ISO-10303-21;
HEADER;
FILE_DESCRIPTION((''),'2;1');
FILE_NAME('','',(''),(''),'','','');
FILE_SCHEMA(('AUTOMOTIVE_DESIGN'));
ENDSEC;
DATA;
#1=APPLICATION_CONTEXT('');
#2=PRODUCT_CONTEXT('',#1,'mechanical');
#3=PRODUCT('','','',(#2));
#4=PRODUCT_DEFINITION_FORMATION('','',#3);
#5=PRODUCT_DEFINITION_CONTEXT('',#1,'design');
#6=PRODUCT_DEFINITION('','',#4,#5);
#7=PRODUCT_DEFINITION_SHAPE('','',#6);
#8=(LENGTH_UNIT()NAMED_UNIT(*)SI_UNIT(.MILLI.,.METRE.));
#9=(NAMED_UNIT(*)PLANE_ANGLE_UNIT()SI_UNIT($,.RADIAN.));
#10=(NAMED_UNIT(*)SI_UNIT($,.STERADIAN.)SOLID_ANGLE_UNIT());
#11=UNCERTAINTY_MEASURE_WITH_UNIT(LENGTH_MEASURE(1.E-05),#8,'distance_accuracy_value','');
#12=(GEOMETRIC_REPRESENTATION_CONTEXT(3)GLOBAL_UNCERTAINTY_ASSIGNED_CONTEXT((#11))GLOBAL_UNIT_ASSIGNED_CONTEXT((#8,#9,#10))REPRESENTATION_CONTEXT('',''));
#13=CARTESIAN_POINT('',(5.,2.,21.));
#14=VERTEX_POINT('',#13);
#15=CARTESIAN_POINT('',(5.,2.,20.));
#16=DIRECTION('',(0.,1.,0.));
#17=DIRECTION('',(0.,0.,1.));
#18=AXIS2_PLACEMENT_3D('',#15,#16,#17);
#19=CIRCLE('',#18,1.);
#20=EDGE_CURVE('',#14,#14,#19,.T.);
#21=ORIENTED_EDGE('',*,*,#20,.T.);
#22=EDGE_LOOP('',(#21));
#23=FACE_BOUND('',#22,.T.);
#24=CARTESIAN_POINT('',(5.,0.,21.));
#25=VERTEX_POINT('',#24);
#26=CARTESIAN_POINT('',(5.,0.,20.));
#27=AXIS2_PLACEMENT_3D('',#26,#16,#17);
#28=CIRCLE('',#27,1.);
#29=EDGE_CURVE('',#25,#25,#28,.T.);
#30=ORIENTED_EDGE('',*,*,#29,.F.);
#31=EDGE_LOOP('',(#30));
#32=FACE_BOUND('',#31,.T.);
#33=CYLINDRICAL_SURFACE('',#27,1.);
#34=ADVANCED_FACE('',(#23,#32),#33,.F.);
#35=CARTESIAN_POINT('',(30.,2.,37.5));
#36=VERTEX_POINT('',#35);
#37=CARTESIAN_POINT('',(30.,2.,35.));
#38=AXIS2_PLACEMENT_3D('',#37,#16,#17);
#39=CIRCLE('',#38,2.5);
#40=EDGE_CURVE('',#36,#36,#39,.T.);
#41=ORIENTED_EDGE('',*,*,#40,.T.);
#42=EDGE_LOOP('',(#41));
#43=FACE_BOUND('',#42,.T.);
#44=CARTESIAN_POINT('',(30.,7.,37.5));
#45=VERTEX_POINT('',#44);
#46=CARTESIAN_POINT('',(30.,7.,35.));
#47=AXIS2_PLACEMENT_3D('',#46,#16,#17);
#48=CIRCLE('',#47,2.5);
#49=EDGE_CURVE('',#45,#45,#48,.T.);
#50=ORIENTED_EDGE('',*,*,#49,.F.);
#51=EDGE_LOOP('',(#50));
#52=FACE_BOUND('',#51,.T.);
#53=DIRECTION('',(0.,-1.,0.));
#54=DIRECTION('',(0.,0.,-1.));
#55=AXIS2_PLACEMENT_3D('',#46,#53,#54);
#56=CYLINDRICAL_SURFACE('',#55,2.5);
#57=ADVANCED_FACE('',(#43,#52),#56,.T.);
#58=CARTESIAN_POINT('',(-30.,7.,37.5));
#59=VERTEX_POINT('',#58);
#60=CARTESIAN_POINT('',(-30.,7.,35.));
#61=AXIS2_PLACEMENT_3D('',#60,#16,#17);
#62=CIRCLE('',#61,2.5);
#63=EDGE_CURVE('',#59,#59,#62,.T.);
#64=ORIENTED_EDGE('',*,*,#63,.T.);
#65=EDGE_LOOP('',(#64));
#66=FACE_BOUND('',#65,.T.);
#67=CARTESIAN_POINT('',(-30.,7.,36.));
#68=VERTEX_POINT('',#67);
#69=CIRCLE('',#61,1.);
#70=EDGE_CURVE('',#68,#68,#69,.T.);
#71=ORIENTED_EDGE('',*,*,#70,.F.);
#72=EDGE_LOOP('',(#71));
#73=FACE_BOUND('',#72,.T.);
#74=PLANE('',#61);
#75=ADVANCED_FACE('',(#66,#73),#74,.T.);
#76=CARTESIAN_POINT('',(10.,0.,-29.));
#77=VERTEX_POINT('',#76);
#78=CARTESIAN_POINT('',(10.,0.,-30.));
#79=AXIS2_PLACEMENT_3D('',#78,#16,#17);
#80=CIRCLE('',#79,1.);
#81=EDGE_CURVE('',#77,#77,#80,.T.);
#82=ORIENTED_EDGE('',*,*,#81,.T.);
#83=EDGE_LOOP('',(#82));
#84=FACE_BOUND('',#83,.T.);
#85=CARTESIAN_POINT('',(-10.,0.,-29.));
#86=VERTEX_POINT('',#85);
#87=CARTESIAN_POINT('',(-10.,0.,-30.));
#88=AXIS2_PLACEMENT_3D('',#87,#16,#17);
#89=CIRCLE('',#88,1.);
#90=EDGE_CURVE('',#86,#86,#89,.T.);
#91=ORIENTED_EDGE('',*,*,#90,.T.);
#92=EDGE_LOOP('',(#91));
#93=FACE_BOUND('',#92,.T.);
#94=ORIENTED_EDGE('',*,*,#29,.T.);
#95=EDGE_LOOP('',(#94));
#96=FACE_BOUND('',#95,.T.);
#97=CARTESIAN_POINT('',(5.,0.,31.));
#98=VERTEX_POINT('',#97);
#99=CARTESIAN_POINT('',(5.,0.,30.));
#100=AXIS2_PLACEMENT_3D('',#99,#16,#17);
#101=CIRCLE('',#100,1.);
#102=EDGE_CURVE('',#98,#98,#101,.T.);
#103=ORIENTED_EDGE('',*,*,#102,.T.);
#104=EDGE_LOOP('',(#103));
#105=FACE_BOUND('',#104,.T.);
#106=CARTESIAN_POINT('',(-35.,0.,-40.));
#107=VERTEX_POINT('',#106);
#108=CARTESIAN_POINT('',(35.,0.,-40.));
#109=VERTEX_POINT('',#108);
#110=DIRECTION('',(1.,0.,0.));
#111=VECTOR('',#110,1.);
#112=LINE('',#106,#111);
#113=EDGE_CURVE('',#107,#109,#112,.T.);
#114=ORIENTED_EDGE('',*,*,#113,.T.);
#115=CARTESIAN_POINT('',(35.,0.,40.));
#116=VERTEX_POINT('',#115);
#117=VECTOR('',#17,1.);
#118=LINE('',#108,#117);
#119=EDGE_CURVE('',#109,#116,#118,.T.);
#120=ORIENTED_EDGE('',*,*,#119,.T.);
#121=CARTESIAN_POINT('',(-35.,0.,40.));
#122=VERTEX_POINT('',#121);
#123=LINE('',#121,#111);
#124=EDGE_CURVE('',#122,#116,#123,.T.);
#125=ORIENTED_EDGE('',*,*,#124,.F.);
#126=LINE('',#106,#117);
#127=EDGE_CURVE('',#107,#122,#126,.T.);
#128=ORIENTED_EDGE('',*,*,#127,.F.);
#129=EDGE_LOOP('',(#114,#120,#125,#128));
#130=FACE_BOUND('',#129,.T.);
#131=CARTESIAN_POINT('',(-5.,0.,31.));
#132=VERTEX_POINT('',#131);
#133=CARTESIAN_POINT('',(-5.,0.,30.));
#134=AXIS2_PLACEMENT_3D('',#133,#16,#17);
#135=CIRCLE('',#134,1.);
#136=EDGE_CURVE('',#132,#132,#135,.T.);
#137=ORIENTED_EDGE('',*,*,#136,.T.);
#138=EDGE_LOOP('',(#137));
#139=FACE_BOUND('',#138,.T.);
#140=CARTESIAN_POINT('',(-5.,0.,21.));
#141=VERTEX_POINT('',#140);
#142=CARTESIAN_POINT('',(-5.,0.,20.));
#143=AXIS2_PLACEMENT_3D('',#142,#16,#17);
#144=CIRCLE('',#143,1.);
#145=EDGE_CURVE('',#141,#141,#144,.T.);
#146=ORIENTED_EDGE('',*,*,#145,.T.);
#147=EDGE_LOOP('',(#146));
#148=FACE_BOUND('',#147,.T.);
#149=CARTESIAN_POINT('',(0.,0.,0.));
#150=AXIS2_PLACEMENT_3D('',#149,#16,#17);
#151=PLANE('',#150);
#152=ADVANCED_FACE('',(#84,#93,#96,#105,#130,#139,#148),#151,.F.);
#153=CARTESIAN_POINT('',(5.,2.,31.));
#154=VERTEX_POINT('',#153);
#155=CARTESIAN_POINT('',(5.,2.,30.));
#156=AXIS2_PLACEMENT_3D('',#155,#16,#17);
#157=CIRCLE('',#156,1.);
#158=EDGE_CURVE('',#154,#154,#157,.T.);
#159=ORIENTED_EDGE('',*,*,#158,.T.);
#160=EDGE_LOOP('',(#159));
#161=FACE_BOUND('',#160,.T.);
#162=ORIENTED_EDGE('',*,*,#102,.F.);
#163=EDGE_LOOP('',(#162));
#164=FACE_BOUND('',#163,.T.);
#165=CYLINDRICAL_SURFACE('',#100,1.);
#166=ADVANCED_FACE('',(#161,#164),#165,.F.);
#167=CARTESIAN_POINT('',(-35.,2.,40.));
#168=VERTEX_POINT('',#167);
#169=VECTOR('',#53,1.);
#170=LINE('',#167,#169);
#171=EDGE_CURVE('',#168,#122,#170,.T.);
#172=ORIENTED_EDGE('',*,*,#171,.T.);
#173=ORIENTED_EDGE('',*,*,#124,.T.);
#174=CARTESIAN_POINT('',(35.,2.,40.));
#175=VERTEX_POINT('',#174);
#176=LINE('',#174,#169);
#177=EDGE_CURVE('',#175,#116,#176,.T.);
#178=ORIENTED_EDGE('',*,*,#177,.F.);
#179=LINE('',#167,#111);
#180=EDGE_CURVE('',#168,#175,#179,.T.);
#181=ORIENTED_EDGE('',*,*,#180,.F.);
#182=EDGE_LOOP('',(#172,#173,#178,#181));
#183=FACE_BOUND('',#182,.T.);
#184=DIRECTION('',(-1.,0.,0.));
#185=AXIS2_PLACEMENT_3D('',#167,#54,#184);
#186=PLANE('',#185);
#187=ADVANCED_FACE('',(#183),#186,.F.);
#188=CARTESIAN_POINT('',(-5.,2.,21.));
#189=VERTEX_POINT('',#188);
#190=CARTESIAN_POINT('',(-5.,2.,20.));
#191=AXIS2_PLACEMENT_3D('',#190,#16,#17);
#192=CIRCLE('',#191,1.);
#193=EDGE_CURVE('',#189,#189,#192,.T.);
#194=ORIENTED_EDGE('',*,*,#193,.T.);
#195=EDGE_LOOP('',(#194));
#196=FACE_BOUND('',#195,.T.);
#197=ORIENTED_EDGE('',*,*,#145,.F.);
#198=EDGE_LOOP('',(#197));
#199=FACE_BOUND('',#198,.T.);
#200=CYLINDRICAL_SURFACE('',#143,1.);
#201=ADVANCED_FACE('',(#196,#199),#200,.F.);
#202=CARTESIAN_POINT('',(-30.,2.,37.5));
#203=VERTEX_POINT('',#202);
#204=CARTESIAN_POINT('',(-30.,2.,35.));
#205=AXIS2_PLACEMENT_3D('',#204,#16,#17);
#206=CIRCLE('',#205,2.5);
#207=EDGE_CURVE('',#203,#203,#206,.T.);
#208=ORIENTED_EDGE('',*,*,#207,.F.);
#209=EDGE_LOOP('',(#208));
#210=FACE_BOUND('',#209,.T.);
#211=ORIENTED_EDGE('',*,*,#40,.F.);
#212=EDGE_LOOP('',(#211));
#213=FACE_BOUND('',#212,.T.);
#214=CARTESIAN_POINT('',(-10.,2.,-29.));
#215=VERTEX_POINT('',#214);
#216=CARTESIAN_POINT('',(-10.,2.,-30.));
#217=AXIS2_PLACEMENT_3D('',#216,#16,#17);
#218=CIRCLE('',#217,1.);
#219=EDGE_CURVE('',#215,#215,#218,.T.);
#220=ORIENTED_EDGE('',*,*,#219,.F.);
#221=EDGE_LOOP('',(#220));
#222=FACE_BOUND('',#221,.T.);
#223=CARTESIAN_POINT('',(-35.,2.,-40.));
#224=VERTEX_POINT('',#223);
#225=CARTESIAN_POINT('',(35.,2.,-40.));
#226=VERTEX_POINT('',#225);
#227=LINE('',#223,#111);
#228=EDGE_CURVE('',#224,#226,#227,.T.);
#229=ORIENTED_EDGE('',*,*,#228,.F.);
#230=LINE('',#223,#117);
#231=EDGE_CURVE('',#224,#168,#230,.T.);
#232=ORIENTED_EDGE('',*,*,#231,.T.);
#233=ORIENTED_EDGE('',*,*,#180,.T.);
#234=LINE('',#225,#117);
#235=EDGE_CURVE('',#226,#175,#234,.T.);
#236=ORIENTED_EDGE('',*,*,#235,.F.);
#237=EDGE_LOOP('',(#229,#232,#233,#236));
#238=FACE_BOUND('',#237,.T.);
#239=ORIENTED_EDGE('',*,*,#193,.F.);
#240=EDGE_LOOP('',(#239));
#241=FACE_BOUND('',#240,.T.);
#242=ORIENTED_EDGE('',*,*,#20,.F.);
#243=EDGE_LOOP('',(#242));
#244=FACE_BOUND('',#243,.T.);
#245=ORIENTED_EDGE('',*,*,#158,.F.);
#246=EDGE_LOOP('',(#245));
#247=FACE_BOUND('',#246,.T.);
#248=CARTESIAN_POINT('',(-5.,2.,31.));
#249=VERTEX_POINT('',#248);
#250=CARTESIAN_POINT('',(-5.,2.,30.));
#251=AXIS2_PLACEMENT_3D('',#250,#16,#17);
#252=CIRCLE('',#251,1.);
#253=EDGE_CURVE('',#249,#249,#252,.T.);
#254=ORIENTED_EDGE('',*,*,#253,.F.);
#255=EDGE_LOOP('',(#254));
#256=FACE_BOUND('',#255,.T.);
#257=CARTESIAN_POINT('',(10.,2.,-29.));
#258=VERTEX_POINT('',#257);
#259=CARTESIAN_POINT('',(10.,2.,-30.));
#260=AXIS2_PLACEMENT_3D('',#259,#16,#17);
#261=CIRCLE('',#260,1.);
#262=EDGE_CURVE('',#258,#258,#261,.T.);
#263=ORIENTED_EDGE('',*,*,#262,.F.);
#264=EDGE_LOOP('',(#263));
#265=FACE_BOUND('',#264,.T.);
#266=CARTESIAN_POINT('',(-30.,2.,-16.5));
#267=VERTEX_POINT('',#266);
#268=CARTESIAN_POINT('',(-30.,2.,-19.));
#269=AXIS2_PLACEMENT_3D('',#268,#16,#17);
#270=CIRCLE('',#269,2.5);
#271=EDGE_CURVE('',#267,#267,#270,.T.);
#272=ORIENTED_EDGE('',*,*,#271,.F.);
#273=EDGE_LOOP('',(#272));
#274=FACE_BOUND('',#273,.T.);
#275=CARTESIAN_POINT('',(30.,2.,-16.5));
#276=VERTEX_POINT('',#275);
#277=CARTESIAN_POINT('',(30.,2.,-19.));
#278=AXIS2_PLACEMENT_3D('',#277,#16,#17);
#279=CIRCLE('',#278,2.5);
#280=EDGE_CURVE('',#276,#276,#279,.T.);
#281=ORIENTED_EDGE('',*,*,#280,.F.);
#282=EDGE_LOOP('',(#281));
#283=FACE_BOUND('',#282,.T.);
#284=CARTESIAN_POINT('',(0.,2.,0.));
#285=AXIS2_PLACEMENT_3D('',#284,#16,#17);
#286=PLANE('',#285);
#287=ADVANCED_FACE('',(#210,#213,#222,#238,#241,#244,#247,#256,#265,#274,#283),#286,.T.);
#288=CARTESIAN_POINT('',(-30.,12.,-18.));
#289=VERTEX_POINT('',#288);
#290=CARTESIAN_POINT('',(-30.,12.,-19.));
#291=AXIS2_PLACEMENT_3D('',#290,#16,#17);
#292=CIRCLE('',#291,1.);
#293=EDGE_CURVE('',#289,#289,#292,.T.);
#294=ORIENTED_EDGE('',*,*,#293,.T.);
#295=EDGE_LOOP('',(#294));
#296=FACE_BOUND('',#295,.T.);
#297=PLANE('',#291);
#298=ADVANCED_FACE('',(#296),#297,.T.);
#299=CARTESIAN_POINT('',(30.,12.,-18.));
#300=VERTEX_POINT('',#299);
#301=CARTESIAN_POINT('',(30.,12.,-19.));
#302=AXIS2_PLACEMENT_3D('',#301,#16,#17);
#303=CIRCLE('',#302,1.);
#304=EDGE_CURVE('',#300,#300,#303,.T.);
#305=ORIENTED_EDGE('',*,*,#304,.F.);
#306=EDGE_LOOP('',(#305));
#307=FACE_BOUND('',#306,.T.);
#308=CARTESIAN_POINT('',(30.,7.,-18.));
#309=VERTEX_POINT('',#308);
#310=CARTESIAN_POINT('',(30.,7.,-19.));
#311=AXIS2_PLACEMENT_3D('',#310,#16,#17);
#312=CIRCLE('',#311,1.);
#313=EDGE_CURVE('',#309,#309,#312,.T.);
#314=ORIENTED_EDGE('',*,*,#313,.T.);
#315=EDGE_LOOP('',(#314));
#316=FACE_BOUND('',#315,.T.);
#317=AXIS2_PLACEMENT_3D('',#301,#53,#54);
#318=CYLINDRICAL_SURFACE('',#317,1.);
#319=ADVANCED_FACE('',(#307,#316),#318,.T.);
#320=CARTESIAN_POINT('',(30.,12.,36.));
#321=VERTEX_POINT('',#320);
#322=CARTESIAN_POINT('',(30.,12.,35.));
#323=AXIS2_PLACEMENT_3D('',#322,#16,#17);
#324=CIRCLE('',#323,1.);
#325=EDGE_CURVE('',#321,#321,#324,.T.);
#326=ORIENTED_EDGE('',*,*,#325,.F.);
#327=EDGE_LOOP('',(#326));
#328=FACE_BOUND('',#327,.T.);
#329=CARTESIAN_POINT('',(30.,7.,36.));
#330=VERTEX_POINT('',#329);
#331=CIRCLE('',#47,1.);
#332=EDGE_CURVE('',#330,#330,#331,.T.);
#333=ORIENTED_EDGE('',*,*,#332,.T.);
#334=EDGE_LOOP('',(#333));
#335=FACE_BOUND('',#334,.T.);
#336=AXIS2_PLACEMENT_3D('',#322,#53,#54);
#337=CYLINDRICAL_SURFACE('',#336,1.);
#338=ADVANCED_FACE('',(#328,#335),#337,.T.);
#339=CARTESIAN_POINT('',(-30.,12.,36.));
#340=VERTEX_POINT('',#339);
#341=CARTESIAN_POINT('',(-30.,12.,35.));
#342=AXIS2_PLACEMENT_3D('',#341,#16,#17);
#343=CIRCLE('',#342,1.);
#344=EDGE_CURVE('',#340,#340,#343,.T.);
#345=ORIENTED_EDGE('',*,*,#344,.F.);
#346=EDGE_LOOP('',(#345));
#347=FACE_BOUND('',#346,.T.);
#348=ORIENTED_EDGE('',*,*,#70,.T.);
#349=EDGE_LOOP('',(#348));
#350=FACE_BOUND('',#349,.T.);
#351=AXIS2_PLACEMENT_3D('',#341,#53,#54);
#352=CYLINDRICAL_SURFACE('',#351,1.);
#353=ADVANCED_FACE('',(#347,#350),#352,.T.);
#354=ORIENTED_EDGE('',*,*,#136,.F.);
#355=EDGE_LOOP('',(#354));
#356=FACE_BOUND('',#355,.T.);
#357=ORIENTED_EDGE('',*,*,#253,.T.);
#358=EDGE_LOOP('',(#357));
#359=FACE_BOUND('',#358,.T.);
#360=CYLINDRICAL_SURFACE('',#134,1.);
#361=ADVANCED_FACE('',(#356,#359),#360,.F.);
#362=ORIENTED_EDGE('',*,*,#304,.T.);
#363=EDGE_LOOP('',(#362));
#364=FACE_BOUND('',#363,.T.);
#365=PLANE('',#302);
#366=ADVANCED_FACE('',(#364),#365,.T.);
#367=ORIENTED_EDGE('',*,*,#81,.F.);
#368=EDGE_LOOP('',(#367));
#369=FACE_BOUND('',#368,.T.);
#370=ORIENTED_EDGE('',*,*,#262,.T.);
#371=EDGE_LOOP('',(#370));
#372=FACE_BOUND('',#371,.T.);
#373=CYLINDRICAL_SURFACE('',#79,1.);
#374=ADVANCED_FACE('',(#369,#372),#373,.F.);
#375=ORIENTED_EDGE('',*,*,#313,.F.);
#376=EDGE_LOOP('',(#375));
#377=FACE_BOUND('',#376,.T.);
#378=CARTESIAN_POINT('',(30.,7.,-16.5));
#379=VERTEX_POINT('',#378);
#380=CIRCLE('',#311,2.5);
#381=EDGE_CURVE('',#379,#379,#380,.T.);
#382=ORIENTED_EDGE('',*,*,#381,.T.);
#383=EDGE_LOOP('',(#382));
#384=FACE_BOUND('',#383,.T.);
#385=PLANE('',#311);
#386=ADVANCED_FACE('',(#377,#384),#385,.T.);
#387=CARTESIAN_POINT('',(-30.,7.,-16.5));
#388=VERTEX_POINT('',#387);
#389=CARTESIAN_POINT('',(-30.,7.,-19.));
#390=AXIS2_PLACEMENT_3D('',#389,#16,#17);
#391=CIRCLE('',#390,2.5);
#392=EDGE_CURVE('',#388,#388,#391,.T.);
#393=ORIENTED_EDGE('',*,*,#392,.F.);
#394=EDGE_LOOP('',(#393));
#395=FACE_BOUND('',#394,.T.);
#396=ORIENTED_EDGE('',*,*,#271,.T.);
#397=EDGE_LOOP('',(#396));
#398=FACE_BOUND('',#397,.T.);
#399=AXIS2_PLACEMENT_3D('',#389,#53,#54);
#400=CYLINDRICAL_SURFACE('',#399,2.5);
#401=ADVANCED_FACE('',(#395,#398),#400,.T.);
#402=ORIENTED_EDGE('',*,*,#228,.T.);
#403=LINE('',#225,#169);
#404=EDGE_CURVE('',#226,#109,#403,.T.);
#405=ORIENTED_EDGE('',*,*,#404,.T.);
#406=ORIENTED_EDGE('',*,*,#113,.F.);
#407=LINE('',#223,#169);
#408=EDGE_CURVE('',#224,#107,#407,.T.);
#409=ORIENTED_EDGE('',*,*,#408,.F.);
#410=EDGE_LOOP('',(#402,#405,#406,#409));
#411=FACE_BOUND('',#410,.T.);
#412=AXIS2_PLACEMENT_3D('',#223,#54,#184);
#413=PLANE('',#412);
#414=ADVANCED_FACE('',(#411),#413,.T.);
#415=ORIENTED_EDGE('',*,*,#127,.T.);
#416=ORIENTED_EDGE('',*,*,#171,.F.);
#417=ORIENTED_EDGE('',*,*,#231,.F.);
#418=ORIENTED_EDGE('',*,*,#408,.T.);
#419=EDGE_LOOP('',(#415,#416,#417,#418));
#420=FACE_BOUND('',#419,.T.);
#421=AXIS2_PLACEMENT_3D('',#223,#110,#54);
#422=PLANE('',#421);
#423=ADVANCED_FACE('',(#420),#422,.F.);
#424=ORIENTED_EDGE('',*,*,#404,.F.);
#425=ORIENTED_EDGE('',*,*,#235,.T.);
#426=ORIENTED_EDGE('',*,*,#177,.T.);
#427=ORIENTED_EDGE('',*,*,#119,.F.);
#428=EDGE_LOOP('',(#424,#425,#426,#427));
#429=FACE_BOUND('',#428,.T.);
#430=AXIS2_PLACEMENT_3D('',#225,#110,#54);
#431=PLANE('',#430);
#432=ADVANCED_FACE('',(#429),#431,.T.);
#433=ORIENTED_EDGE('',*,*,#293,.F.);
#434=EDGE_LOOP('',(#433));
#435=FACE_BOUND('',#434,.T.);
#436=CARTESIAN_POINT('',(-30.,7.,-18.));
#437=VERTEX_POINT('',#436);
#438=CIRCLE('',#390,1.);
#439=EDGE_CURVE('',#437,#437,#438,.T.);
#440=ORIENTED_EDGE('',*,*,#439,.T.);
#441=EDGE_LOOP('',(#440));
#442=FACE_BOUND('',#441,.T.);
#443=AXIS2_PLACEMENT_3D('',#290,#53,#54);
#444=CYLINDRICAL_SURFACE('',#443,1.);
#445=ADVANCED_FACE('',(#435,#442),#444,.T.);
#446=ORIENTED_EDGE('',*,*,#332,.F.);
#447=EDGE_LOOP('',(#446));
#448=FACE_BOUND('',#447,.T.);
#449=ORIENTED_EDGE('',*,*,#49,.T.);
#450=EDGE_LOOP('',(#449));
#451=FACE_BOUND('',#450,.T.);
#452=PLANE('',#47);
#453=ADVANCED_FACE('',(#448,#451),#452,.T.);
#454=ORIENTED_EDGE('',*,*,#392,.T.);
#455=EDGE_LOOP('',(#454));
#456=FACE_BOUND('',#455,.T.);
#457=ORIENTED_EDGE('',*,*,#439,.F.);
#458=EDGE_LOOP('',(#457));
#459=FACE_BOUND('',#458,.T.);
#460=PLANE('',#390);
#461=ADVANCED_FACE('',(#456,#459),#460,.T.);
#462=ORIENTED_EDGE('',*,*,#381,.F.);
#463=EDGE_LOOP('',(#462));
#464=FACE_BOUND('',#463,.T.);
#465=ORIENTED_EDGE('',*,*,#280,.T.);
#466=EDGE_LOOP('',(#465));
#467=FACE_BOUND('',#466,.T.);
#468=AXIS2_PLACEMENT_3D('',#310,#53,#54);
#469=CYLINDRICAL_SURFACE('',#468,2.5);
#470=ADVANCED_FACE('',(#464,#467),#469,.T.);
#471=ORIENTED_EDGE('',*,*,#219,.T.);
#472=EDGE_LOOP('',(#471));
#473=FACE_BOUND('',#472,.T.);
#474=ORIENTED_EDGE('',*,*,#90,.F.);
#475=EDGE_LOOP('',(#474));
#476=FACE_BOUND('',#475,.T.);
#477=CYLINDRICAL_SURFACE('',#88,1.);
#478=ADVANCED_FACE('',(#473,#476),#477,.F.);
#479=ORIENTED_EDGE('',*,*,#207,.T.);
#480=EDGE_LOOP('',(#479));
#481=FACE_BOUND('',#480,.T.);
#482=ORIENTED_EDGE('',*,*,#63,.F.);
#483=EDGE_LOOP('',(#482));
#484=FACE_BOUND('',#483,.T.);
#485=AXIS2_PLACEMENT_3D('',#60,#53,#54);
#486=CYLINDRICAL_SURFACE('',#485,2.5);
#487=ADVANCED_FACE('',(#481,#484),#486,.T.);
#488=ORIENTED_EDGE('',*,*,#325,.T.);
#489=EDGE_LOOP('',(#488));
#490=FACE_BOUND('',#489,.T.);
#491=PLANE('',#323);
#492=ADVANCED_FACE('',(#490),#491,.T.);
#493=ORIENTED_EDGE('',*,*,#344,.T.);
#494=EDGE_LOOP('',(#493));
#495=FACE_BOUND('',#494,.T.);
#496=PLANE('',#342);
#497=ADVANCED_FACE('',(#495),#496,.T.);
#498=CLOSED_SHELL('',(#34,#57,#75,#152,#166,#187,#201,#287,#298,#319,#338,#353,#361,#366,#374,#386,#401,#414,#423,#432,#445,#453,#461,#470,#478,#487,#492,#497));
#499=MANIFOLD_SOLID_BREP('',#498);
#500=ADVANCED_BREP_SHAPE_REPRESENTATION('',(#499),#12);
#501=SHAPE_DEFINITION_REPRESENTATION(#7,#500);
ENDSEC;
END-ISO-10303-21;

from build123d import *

# Parameters (mm, degrees)
BOSS_EXTRUDE1_OUTLINE_W = 70
BOSS_EXTRUDE1_OUTLINE_H = 80
BOSS_EXTRUDE1_DEPTH     = 2
SKETCH2_R               = 2.5
BOSS_EXTRUDE2_DEPTH     = 5
SKETCH3_R               = 1
BOSS_EXTRUDE3_DEPTH     = 5
SKETCH4_R               = 1
CUT_EXTRUDE1_DEPTH      = 55.083269132
SKETCH5_R               = 1
CUT_EXTRUDE2_DEPTH      = 55.083269132


# Read off the part's stored shape, not the designer's step: Boss-Extrude1
with BuildPart() as part:
    # Boss-Extrude1 outline → Boss-Extrude1 (new body)
    with BuildSketch(Plane(origin=(0, 0, 0), x_dir=(1, 0, 0), z_dir=(0, 1, 0))):
        Rectangle(BOSS_EXTRUDE1_OUTLINE_W, BOSS_EXTRUDE1_OUTLINE_H)
    extrude(amount=BOSS_EXTRUDE1_DEPTH)

    # Sketch2 → Boss-Extrude2 (add)
    with BuildSketch(Plane(origin=(0, 2, 0), x_dir=(1, 0, 0), z_dir=(0, 1, 0))):
        with Locations(Location((-30, 19, 0), (0, 0, 270))):
            Circle(SKETCH2_R)
        with Locations(Location((30, 19, 0), (0, 0, 270))):
            Circle(SKETCH2_R)
        with Locations(Location((-30, -35, 0), (0, 0, 270))):
            Circle(SKETCH2_R)
        with Locations(Location((30, -35, 0), (0, 0, 270))):
            Circle(SKETCH2_R)
    extrude(amount=BOSS_EXTRUDE2_DEPTH)

    # Sketch3 → Boss-Extrude3 (add)
    with BuildSketch(Plane(origin=(0, 7, 0), x_dir=(1, 0, 0), z_dir=(0, 1, 0))):
        with Locations(Location((-30, 19, 0), (0, 0, 270))):
            Circle(SKETCH3_R)
        with Locations(Location((30, 19, 0), (0, 0, 270))):
            Circle(SKETCH3_R)
        with Locations(Location((30, -35, 0), (0, 0, 270))):
            Circle(SKETCH3_R)
        with Locations(Location((-30, -35, 0), (0, 0, 270))):
            Circle(SKETCH3_R)
    extrude(amount=BOSS_EXTRUDE3_DEPTH)

    # Sketch4 → Cut-Extrude1 (cut, through all)
    with BuildSketch(Plane(origin=(0, 2, 0), x_dir=(1, 0, 0), z_dir=(0, 1, 0))):
        with Locations(Location((-5, -30, 0), (0, 0, 270))):
            Circle(SKETCH4_R)
        with Locations(Location((-5, -20, 0), (0, 0, 270))):
            Circle(SKETCH4_R)
        with Locations(Location((5, -20, 0), (0, 0, 270))):
            Circle(SKETCH4_R)
        with Locations(Location((5, -30, 0), (0, 0, 270))):
            Circle(SKETCH4_R)
    extrude(amount=-CUT_EXTRUDE1_DEPTH, mode=Mode.SUBTRACT)

    # Sketch5 → Cut-Extrude2 (cut, through all)
    with BuildSketch(Plane(origin=(0, 2, 0), x_dir=(1, 0, 0), z_dir=(0, 1, 0))):
        with Locations(Location((-10, 30, 0), (0, 0, 270))):
            Circle(SKETCH5_R)
        with Locations(Location((10, 30, 0), (0, 0, 270))):
            Circle(SKETCH5_R)
    extrude(amount=-CUT_EXTRUDE2_DEPTH, mode=Mode.SUBTRACT)


solid = part.part
